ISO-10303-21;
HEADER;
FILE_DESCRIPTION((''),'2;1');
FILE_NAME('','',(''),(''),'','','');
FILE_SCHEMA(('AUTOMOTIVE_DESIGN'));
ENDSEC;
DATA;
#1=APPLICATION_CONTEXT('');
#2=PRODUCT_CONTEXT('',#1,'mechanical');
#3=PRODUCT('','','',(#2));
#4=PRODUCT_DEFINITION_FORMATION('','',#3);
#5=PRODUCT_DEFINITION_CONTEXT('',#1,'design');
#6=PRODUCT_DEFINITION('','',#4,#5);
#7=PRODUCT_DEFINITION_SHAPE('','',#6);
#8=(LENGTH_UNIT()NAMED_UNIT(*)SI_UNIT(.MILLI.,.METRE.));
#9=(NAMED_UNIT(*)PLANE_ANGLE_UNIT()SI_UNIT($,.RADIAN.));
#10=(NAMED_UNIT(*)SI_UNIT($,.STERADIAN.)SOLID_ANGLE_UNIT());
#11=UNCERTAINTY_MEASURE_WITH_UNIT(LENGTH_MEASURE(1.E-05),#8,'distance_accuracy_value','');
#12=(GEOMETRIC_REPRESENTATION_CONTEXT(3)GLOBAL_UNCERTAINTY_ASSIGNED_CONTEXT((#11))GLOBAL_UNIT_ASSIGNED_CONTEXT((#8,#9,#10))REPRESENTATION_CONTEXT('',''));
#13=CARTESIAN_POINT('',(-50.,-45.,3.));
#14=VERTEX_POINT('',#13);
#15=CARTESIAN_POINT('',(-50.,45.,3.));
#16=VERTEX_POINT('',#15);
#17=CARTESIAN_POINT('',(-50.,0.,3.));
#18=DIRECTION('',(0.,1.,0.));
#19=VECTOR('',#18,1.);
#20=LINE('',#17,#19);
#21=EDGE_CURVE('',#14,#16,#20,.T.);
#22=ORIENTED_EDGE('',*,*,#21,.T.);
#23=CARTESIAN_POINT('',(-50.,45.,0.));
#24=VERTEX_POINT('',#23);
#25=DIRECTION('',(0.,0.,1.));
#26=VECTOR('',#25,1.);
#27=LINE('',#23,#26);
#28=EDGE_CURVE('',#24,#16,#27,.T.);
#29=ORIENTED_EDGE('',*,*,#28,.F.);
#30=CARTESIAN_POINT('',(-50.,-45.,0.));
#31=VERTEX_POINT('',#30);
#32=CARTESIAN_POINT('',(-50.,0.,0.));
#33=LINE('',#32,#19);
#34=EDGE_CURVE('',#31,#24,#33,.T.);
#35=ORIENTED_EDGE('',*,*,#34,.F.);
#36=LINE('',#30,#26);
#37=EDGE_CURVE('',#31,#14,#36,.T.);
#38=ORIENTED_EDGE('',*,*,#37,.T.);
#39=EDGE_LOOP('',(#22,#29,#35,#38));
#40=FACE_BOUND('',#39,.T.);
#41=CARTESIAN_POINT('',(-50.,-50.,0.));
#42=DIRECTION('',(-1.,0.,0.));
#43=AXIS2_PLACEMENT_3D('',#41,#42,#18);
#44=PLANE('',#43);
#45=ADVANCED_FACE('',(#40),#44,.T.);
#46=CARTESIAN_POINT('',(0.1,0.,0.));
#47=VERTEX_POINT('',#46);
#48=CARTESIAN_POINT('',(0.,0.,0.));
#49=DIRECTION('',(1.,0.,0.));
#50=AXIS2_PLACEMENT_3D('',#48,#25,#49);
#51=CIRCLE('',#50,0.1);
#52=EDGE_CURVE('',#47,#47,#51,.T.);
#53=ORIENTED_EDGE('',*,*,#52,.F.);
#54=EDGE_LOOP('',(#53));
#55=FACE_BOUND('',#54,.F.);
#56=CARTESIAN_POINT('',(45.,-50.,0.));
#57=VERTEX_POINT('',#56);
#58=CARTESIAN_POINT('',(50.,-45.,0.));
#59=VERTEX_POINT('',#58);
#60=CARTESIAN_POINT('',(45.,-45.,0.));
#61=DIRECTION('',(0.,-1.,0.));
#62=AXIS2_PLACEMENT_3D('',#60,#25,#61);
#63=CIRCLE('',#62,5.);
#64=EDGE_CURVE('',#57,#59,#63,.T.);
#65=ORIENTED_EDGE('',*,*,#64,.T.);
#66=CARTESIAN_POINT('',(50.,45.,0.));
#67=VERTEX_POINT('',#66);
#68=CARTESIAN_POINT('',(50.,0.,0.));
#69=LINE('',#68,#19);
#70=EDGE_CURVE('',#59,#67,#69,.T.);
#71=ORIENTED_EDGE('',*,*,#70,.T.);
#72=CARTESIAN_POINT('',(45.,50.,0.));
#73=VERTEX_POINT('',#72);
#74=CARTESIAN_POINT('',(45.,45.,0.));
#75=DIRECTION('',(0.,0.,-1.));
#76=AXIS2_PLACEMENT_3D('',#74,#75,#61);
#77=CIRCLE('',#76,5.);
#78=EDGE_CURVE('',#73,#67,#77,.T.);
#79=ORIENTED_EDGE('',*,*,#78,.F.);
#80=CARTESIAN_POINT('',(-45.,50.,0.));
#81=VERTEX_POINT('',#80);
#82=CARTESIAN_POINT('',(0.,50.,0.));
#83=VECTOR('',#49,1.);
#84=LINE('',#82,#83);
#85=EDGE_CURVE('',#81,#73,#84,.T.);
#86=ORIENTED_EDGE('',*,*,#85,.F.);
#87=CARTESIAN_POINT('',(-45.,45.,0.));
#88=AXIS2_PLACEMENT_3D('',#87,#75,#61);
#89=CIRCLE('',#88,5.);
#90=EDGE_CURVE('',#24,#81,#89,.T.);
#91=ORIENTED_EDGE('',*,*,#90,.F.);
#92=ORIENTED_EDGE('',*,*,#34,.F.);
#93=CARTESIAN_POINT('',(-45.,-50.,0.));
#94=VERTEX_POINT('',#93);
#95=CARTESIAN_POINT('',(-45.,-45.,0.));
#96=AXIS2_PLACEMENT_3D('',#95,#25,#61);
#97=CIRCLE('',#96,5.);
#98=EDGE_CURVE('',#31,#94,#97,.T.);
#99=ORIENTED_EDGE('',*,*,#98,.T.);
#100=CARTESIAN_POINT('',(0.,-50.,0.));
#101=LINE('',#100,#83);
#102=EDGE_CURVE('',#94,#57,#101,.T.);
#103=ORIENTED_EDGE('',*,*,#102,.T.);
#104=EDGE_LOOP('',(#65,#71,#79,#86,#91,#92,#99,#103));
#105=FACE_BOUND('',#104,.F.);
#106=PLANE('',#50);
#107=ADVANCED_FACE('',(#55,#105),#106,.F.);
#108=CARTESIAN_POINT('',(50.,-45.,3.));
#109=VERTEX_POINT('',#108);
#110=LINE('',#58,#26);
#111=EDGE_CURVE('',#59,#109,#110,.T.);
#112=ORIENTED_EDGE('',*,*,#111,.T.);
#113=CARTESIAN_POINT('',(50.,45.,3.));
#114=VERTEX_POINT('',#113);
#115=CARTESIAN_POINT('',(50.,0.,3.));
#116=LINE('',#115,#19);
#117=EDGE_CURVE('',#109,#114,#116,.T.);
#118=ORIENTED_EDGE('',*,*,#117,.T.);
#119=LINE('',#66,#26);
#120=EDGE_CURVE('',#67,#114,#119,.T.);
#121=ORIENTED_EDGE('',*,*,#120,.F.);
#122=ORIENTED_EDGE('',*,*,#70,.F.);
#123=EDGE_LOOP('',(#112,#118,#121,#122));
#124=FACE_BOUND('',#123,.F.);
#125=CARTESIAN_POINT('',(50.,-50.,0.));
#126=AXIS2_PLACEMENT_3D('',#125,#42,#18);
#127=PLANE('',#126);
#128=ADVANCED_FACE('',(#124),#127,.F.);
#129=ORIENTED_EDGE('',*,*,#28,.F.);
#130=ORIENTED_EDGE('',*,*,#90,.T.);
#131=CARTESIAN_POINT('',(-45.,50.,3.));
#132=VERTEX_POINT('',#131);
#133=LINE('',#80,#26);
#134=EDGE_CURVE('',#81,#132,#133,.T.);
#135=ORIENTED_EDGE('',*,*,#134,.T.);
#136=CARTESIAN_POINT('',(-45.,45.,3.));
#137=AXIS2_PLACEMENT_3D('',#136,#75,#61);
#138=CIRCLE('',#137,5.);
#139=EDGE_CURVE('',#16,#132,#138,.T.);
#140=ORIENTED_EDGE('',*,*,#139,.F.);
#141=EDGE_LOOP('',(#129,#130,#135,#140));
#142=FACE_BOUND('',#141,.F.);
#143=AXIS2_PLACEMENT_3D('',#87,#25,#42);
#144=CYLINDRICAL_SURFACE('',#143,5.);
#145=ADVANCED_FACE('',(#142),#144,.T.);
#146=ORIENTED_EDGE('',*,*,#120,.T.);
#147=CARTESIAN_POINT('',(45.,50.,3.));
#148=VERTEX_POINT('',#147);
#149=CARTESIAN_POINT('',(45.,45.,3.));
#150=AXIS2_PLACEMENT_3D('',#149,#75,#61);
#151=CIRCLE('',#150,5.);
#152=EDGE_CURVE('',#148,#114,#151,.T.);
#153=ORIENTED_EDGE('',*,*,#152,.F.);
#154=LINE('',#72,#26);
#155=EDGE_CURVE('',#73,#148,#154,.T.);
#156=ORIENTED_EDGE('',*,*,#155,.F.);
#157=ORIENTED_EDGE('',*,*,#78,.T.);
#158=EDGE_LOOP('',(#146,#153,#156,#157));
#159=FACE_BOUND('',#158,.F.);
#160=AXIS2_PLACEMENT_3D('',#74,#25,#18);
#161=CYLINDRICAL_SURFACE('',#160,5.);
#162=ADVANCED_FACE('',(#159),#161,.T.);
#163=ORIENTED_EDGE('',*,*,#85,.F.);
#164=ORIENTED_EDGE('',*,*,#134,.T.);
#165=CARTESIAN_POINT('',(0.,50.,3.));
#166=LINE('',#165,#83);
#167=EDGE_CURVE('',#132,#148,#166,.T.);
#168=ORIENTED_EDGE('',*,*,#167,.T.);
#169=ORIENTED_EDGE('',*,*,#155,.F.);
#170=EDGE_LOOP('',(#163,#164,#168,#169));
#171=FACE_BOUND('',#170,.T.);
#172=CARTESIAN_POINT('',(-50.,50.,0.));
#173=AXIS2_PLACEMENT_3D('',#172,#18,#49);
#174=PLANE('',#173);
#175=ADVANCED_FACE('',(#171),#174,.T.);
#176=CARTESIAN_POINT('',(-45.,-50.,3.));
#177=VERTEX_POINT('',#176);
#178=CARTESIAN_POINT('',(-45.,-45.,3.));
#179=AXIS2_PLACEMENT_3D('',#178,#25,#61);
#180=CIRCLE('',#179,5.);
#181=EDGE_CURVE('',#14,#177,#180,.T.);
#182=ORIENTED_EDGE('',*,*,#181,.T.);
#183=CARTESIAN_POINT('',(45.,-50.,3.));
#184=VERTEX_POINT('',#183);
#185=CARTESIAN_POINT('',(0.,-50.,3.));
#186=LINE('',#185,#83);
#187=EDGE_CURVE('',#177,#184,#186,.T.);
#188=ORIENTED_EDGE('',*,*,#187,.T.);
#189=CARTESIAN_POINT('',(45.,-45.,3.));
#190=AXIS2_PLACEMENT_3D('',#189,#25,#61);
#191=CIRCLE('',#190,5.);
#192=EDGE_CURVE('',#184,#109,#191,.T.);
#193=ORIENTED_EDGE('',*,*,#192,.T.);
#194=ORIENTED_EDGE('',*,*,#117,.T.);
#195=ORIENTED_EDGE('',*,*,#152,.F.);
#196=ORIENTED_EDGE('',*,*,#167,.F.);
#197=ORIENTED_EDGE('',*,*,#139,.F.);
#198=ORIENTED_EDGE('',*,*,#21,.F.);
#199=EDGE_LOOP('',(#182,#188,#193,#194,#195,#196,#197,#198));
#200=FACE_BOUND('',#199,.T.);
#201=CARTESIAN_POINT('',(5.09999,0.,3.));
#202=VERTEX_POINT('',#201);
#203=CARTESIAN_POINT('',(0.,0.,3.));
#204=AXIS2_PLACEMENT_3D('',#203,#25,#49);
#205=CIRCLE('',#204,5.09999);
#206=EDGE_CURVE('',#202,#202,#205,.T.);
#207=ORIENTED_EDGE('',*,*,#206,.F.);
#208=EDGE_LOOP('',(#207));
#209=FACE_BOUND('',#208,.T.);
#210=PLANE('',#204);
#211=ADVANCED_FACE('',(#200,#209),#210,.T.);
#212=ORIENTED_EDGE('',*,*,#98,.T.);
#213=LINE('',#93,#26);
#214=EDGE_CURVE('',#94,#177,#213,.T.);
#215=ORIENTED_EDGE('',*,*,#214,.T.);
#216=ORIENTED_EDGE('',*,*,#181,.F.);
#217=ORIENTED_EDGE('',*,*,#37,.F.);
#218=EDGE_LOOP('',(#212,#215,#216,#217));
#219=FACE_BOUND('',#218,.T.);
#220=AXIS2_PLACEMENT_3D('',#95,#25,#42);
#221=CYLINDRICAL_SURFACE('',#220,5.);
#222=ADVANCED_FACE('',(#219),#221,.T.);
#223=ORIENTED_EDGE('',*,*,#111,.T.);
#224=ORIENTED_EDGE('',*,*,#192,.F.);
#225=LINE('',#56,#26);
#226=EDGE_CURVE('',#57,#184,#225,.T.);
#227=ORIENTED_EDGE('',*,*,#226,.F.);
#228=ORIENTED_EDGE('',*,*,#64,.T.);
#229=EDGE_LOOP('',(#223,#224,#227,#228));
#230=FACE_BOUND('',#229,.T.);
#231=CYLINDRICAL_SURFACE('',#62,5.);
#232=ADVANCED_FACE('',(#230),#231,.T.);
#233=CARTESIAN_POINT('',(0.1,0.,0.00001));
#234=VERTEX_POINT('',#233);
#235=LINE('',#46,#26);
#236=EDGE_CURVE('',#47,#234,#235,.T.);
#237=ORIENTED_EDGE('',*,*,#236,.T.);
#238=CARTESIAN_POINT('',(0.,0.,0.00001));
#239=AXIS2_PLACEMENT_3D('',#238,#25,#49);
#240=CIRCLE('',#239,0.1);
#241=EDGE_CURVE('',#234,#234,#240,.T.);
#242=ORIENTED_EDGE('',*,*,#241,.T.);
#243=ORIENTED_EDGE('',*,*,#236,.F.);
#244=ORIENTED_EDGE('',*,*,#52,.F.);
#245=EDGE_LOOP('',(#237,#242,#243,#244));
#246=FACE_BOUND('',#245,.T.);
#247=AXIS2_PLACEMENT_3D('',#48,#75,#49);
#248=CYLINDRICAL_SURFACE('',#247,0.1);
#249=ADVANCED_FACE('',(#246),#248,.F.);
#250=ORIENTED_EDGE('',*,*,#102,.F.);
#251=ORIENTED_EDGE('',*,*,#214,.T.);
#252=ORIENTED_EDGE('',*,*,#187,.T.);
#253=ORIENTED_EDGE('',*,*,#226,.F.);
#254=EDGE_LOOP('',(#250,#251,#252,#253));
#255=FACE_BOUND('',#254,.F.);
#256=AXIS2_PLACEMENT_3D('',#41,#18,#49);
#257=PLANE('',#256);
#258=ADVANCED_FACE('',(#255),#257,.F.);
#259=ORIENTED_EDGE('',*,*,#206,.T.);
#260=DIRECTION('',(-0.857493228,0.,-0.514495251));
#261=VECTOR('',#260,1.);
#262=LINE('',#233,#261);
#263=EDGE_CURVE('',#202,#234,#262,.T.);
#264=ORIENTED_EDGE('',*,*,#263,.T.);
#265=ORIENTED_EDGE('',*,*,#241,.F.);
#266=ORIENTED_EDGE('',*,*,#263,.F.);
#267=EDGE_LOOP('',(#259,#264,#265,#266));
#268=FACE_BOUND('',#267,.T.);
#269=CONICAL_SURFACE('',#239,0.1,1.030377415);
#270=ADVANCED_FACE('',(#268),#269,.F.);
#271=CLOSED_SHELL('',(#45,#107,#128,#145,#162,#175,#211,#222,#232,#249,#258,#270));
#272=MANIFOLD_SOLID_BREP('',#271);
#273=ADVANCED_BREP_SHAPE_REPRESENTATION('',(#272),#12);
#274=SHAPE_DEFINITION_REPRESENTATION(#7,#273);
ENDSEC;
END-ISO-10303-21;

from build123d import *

# Parameters (mm, degrees)
F0_W     = 100
F0_H     = 100
F0_R     = 0.1
F1_DEPTH = 3
F2_SIZE2 = 2.99999
F2_SIZE  = 4.99999
F3_R     = 5


# Not quite as in the source:
# - a fillet or chamfer is up to 0.001 mm smaller than in the source, because OpenCascade refuses the exact size


with BuildPart() as f1:
    # F0 (on Top) → F1 (new body)
    with BuildSketch(Plane.XY):
        Rectangle(F0_W, F0_H)
        Circle(F0_R, mode=Mode.SUBTRACT)
    extrude(amount=F1_DEPTH)

    # F2 (size 5 and 3 in the source; OpenCascade refuses exactly that, so slightly less here)
    f2_edges = [f1.edges().sort_by_distance(p)[0] for p in [
        (-0.1, 0, 3),
    ]]
    f2_side = f1.faces().sort_by_distance((0, -48.585786, 3))[0]
    chamfer(f2_edges, length=F2_SIZE, length2=F2_SIZE2, reference=f2_side)

    # F3
    f3_edges = [f1.edges().sort_by_distance(p)[0] for p in [
        (50, -50, 1.5),
        (-50, -50, 1.5),
        (50, 50, 1.5),
        (-50, 50, 1.5),
    ]]
    fillet(f3_edges, radius=F3_R)


solid = f1.part
